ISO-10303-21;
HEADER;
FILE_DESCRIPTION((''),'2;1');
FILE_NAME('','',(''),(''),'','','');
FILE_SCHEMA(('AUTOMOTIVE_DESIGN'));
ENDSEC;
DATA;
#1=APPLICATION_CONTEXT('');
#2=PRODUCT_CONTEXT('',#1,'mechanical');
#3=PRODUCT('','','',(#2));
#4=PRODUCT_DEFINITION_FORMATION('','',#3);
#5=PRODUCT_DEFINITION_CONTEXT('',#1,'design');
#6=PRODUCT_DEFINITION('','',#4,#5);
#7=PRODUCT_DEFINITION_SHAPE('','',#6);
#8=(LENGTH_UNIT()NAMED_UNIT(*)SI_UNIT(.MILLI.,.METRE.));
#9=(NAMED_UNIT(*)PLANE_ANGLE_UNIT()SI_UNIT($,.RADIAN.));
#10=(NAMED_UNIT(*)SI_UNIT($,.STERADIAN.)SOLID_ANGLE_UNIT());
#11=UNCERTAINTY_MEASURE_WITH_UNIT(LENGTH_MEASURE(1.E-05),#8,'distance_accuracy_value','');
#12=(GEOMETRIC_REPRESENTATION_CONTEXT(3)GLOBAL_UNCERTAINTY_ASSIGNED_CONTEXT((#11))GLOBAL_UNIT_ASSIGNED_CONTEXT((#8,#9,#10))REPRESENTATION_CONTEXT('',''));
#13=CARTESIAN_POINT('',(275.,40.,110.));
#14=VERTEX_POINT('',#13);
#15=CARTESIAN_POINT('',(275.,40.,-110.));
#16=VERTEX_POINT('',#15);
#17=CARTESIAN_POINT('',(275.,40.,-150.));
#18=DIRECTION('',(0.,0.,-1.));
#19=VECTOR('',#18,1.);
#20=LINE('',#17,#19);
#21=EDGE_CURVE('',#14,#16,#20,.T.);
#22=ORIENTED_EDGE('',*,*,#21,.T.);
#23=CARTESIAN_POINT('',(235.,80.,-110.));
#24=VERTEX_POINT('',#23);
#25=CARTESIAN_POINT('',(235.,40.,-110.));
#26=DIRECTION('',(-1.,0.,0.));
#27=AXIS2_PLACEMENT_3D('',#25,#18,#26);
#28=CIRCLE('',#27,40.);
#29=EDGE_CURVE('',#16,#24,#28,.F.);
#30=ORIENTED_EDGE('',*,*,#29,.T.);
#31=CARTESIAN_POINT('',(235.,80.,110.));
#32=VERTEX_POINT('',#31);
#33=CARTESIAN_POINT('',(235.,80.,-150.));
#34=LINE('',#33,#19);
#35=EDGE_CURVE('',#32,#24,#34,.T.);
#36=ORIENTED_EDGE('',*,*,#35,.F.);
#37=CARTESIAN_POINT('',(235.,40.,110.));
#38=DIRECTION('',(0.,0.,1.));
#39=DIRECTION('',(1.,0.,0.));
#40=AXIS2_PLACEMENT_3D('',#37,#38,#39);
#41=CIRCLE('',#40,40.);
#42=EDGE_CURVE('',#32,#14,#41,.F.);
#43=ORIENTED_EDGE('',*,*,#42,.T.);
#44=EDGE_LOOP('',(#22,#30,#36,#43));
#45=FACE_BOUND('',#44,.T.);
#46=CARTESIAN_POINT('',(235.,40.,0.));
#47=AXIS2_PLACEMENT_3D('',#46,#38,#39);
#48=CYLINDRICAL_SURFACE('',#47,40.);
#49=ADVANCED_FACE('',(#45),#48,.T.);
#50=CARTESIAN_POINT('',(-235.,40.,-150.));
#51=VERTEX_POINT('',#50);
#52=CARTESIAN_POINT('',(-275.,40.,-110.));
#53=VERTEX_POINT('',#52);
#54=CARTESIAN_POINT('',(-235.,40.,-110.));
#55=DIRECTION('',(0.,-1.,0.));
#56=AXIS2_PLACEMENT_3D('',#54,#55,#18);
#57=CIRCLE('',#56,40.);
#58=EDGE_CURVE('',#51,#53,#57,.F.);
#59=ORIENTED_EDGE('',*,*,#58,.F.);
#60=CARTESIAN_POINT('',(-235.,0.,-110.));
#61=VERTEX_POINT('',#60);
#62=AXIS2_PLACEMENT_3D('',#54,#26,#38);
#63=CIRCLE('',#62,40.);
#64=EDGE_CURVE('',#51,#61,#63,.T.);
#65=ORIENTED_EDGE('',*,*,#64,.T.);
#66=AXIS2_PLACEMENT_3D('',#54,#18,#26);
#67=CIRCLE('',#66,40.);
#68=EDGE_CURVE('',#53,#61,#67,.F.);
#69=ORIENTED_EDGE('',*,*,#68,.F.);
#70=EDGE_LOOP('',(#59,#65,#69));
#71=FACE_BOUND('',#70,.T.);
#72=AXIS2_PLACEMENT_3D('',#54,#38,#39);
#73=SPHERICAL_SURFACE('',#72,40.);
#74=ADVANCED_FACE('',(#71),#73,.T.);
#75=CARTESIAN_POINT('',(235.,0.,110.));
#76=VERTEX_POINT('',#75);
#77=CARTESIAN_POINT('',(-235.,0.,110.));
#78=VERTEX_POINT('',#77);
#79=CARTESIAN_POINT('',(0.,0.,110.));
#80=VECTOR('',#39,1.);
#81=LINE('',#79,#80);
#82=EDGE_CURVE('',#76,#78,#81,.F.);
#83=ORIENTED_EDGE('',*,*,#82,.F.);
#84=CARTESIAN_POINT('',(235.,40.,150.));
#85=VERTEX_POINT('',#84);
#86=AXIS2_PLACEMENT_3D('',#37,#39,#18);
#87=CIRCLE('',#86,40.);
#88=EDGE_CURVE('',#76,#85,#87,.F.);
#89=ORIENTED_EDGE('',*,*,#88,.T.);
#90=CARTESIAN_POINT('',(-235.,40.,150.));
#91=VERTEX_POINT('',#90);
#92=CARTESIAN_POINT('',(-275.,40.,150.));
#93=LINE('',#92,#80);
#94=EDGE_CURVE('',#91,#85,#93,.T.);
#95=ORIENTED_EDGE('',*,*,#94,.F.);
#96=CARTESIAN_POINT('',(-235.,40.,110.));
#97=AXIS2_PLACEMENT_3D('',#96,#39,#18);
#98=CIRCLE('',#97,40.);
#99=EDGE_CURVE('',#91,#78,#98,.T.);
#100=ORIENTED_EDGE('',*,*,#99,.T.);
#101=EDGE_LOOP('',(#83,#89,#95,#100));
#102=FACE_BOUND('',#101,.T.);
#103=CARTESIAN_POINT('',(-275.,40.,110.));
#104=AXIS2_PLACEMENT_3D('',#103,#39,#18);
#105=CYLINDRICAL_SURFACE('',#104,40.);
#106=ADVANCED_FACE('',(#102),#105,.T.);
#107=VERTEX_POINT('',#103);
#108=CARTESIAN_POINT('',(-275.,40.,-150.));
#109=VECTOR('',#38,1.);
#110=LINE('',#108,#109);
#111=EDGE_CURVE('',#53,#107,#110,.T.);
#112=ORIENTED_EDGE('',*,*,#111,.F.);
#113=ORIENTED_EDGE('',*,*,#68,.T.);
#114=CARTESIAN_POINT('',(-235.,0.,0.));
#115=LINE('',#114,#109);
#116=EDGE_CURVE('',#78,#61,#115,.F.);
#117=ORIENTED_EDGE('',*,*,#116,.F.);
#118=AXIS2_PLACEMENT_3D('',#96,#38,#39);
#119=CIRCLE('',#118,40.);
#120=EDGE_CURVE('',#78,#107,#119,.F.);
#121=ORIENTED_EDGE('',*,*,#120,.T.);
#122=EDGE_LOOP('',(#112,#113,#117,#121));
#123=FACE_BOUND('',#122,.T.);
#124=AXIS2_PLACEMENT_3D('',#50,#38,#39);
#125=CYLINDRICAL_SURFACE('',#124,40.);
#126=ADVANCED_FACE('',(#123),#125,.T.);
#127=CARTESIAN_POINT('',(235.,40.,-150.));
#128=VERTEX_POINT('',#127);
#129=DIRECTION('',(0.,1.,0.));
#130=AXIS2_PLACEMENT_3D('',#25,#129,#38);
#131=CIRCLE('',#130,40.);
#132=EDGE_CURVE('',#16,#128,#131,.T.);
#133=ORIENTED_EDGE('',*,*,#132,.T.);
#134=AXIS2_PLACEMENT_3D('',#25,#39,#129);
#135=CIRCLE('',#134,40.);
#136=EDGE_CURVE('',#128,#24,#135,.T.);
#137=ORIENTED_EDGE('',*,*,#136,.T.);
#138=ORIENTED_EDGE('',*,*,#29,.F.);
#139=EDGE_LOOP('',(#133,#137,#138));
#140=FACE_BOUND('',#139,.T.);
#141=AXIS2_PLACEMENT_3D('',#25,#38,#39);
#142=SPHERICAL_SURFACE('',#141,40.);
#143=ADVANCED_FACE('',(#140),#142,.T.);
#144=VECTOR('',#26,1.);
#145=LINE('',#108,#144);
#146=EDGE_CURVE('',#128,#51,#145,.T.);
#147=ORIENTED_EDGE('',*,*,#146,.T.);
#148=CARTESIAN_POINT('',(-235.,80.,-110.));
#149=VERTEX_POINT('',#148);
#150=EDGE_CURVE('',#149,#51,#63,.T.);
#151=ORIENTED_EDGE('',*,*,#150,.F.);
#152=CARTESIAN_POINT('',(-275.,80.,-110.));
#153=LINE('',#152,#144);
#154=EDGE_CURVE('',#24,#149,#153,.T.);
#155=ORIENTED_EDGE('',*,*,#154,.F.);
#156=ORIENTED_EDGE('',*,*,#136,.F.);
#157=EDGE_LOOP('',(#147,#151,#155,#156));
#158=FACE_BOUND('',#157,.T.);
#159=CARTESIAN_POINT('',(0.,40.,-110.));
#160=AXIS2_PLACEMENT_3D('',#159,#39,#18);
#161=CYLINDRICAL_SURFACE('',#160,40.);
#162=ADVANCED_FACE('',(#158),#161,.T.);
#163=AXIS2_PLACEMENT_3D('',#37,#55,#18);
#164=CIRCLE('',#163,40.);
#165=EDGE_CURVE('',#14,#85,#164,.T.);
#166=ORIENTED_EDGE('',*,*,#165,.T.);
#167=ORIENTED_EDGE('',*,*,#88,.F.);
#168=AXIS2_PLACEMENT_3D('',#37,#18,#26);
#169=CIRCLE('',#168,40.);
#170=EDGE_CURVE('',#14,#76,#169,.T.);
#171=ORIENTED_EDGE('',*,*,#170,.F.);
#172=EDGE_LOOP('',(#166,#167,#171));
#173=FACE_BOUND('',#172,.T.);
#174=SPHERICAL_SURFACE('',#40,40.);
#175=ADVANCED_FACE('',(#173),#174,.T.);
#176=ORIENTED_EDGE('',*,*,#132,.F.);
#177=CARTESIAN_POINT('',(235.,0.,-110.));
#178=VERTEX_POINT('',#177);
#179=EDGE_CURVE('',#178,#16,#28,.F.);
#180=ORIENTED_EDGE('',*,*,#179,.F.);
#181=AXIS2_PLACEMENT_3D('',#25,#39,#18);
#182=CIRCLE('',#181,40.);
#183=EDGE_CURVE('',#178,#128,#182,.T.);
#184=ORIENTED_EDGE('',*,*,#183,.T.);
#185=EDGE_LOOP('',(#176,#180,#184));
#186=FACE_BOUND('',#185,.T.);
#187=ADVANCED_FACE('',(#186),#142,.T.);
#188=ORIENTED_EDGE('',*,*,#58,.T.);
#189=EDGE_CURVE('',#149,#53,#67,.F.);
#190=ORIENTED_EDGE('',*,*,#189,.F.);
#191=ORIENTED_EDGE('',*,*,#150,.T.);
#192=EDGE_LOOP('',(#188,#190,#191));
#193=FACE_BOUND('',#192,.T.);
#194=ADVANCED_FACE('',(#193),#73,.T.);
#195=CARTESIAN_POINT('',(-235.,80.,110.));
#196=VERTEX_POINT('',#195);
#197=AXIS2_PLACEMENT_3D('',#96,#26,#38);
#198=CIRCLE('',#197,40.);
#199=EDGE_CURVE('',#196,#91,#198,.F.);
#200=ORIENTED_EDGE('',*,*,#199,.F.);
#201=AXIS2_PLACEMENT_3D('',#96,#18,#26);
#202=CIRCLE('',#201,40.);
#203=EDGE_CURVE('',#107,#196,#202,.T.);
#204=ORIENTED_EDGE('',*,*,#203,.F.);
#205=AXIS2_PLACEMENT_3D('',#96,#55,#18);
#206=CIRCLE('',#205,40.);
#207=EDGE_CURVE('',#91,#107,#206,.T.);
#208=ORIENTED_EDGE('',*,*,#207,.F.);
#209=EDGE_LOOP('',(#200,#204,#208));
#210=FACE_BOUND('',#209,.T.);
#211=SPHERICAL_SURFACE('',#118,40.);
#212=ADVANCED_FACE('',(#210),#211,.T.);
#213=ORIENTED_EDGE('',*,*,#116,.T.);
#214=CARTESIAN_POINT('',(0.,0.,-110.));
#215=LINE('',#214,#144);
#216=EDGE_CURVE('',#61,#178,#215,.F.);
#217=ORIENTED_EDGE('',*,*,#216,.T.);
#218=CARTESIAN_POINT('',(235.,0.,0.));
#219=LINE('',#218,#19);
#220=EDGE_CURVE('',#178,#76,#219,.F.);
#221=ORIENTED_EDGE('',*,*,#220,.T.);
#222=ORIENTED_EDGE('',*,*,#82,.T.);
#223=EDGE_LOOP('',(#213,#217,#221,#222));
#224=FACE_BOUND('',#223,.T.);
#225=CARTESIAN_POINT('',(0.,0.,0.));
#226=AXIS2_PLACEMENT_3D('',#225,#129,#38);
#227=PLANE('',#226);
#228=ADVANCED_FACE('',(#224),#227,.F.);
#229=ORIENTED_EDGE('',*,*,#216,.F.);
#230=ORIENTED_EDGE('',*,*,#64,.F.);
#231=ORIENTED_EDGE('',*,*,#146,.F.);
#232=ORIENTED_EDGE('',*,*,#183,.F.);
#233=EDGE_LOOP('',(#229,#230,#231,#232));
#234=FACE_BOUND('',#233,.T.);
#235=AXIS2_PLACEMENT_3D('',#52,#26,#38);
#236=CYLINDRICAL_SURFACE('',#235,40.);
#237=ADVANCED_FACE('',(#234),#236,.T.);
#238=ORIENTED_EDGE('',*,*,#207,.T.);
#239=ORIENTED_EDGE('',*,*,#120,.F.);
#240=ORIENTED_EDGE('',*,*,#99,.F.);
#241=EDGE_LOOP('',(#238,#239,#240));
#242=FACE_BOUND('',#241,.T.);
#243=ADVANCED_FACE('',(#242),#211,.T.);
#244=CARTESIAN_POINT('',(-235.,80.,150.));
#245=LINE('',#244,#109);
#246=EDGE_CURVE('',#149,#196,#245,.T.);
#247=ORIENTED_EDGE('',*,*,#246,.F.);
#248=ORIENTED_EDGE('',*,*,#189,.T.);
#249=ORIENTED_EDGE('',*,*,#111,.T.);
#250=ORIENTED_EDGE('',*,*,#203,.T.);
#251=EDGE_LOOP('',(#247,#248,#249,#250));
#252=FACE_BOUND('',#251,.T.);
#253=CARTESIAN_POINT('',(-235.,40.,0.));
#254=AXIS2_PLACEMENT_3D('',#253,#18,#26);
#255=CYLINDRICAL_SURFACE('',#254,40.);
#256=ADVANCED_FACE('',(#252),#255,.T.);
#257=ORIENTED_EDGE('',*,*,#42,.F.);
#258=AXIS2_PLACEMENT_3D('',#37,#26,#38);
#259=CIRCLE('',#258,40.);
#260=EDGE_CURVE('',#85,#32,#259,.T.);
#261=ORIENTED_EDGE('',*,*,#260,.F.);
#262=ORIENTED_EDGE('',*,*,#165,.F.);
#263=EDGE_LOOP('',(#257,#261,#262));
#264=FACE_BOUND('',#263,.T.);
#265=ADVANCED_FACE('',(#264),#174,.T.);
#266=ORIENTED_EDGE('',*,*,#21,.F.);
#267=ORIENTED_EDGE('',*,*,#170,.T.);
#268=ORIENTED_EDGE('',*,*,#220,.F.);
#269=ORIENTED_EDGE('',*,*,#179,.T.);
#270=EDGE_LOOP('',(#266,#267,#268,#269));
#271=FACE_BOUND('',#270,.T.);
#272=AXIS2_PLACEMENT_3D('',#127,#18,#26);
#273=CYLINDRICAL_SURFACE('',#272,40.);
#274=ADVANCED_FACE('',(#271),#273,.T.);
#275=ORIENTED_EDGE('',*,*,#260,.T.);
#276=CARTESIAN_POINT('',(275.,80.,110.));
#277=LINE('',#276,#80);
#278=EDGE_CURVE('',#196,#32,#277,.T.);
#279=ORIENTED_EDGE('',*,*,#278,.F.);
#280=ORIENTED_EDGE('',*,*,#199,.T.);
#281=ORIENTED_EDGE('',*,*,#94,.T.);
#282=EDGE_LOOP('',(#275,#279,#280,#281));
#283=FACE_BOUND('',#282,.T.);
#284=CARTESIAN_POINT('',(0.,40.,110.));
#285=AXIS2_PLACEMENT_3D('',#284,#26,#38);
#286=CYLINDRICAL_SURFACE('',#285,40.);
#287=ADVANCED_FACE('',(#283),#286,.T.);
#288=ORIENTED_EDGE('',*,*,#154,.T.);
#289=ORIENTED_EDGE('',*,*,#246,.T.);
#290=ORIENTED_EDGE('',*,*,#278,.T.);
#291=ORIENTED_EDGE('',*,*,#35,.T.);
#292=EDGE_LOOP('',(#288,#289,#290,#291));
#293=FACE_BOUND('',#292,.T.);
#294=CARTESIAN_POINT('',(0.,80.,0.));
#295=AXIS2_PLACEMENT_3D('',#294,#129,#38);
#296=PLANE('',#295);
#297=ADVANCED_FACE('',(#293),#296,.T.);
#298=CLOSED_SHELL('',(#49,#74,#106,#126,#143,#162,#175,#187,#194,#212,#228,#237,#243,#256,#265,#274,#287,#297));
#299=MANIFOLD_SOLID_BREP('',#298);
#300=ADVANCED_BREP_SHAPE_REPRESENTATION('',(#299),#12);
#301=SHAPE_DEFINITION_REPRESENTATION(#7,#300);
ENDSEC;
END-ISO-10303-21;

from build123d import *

# Parameters (mm, degrees)
SKETCH1_W           = 550
SKETCH1_H           = 300
BOSS_EXTRUDE1_DEPTH = 80
FILLET1_R           = 40
FILLET2_R           = 40


# Some blends are built 0.0001 mm under size
with BuildPart() as part:
    # Sketch1 → Boss-Extrude1 (new body)
    with BuildSketch(Plane(origin=(0, 0, 0), x_dir=(1, 0, 0), z_dir=(0, 1, 0))):
        Rectangle(SKETCH1_W, SKETCH1_H)
    extrude(amount=BOSS_EXTRUDE1_DEPTH)

    # Fillet1
    fillet1_edges = [part.edges().sort_by_distance(p)[0] for p in [
        (-275, 80, 0),
        (0, 80, 150),
        (275, 80, 0),
        (0, 0, 150),
        (-275, 0, 0),
        (0, 0, -150),
        (275, 0, 0),
        (-275, 40, -150),
        (275, 40, -150),
        (0, 80, -150),
    ]]
    fillet(fillet1_edges, radius=FILLET1_R - 0.0001)  # a hair under: the kernel refuses the full size

    # Fillet2
    # the kernel refuses this fillet: 40 mm, written as the material it takes off along each edge
    with BuildSketch(Plane(origin=(235, 0, 110), x_dir=(1, 0, 0), z_dir=(0, 0, -1))) as fillet2_piece_1:
        with BuildLine():
            CenterArc((0.0001, -39.9999), 39.9999, 0, 90)
            Line((40, -39.9999), (40, 0))
            Line((40, 0), (0.0001, 0))
        make_face()
    revolve(axis=Axis((235, 0, 110), (0, -1, 0)), revolution_arc=90, mode=Mode.SUBTRACT)
    with BuildSketch(Plane(origin=(-235, 0, 110), x_dir=(0, 0, 1), z_dir=(1, 0, 0))) as fillet2_piece_2:
        with BuildLine():
            CenterArc((0.0001, -39.9999), 39.9999, 0, 90)
            Line((40, -39.9999), (40, 0))
            Line((40, 0), (0.0001, 0))
        make_face()
    revolve(axis=Axis((-235, 0, 110), (0, -1, 0)), revolution_arc=90, mode=Mode.SUBTRACT)
    with BuildSketch(Plane(origin=(-235, 80, 110), x_dir=(-1, 0, 0), z_dir=(0, 0, -1))) as fillet2_piece_3:
        with BuildLine():
            CenterArc((0.0001, -39.9999), 39.9999, 0, 90)
            Line((40, -39.9999), (40, 0))
            Line((40, 0), (0.0001, 0))
        make_face()
    revolve(axis=Axis((-235, 80, 110), (0, 1, 0)), revolution_arc=90, mode=Mode.SUBTRACT)
    with BuildSketch(Plane(origin=(235, 80, 110), x_dir=(0, 0, 1), z_dir=(-1, 0, 0))) as fillet2_piece_4:
        with BuildLine():
            CenterArc((0.0001, -39.9999), 39.9999, 0, 90)
            Line((40, -39.9999), (40, 0))
            Line((40, 0), (0.0001, 0))
        make_face()
    revolve(axis=Axis((235, 80, 110), (0, 1, 0)), revolution_arc=90, mode=Mode.SUBTRACT)
    with BuildSketch(Plane(origin=(275, 0, 150), x_dir=(0, 0, -1), z_dir=(0, 1, 0))) as fillet2_piece_5:
        with BuildLine():
            CenterArc((FILLET2_R, FILLET2_R), FILLET2_R, 180, 90)
            Line((0, FILLET2_R), (0, 0))
            Line((0, 0), (FILLET2_R, 0))
        make_face()
    extrude(amount=80, mode=Mode.SUBTRACT)
    with BuildSketch(Plane(origin=(-275, 0, 150), x_dir=(0, 0, -1), z_dir=(0, 1, 0))) as fillet2_piece_6:
        with BuildLine():
            CenterArc((FILLET2_R, -FILLET2_R), FILLET2_R, 90, 90)
            Line((0, -FILLET2_R), (0, 0))
            Line((0, 0), (FILLET2_R, 0))
        make_face()
    extrude(amount=80, mode=Mode.SUBTRACT)


solid = part.part
